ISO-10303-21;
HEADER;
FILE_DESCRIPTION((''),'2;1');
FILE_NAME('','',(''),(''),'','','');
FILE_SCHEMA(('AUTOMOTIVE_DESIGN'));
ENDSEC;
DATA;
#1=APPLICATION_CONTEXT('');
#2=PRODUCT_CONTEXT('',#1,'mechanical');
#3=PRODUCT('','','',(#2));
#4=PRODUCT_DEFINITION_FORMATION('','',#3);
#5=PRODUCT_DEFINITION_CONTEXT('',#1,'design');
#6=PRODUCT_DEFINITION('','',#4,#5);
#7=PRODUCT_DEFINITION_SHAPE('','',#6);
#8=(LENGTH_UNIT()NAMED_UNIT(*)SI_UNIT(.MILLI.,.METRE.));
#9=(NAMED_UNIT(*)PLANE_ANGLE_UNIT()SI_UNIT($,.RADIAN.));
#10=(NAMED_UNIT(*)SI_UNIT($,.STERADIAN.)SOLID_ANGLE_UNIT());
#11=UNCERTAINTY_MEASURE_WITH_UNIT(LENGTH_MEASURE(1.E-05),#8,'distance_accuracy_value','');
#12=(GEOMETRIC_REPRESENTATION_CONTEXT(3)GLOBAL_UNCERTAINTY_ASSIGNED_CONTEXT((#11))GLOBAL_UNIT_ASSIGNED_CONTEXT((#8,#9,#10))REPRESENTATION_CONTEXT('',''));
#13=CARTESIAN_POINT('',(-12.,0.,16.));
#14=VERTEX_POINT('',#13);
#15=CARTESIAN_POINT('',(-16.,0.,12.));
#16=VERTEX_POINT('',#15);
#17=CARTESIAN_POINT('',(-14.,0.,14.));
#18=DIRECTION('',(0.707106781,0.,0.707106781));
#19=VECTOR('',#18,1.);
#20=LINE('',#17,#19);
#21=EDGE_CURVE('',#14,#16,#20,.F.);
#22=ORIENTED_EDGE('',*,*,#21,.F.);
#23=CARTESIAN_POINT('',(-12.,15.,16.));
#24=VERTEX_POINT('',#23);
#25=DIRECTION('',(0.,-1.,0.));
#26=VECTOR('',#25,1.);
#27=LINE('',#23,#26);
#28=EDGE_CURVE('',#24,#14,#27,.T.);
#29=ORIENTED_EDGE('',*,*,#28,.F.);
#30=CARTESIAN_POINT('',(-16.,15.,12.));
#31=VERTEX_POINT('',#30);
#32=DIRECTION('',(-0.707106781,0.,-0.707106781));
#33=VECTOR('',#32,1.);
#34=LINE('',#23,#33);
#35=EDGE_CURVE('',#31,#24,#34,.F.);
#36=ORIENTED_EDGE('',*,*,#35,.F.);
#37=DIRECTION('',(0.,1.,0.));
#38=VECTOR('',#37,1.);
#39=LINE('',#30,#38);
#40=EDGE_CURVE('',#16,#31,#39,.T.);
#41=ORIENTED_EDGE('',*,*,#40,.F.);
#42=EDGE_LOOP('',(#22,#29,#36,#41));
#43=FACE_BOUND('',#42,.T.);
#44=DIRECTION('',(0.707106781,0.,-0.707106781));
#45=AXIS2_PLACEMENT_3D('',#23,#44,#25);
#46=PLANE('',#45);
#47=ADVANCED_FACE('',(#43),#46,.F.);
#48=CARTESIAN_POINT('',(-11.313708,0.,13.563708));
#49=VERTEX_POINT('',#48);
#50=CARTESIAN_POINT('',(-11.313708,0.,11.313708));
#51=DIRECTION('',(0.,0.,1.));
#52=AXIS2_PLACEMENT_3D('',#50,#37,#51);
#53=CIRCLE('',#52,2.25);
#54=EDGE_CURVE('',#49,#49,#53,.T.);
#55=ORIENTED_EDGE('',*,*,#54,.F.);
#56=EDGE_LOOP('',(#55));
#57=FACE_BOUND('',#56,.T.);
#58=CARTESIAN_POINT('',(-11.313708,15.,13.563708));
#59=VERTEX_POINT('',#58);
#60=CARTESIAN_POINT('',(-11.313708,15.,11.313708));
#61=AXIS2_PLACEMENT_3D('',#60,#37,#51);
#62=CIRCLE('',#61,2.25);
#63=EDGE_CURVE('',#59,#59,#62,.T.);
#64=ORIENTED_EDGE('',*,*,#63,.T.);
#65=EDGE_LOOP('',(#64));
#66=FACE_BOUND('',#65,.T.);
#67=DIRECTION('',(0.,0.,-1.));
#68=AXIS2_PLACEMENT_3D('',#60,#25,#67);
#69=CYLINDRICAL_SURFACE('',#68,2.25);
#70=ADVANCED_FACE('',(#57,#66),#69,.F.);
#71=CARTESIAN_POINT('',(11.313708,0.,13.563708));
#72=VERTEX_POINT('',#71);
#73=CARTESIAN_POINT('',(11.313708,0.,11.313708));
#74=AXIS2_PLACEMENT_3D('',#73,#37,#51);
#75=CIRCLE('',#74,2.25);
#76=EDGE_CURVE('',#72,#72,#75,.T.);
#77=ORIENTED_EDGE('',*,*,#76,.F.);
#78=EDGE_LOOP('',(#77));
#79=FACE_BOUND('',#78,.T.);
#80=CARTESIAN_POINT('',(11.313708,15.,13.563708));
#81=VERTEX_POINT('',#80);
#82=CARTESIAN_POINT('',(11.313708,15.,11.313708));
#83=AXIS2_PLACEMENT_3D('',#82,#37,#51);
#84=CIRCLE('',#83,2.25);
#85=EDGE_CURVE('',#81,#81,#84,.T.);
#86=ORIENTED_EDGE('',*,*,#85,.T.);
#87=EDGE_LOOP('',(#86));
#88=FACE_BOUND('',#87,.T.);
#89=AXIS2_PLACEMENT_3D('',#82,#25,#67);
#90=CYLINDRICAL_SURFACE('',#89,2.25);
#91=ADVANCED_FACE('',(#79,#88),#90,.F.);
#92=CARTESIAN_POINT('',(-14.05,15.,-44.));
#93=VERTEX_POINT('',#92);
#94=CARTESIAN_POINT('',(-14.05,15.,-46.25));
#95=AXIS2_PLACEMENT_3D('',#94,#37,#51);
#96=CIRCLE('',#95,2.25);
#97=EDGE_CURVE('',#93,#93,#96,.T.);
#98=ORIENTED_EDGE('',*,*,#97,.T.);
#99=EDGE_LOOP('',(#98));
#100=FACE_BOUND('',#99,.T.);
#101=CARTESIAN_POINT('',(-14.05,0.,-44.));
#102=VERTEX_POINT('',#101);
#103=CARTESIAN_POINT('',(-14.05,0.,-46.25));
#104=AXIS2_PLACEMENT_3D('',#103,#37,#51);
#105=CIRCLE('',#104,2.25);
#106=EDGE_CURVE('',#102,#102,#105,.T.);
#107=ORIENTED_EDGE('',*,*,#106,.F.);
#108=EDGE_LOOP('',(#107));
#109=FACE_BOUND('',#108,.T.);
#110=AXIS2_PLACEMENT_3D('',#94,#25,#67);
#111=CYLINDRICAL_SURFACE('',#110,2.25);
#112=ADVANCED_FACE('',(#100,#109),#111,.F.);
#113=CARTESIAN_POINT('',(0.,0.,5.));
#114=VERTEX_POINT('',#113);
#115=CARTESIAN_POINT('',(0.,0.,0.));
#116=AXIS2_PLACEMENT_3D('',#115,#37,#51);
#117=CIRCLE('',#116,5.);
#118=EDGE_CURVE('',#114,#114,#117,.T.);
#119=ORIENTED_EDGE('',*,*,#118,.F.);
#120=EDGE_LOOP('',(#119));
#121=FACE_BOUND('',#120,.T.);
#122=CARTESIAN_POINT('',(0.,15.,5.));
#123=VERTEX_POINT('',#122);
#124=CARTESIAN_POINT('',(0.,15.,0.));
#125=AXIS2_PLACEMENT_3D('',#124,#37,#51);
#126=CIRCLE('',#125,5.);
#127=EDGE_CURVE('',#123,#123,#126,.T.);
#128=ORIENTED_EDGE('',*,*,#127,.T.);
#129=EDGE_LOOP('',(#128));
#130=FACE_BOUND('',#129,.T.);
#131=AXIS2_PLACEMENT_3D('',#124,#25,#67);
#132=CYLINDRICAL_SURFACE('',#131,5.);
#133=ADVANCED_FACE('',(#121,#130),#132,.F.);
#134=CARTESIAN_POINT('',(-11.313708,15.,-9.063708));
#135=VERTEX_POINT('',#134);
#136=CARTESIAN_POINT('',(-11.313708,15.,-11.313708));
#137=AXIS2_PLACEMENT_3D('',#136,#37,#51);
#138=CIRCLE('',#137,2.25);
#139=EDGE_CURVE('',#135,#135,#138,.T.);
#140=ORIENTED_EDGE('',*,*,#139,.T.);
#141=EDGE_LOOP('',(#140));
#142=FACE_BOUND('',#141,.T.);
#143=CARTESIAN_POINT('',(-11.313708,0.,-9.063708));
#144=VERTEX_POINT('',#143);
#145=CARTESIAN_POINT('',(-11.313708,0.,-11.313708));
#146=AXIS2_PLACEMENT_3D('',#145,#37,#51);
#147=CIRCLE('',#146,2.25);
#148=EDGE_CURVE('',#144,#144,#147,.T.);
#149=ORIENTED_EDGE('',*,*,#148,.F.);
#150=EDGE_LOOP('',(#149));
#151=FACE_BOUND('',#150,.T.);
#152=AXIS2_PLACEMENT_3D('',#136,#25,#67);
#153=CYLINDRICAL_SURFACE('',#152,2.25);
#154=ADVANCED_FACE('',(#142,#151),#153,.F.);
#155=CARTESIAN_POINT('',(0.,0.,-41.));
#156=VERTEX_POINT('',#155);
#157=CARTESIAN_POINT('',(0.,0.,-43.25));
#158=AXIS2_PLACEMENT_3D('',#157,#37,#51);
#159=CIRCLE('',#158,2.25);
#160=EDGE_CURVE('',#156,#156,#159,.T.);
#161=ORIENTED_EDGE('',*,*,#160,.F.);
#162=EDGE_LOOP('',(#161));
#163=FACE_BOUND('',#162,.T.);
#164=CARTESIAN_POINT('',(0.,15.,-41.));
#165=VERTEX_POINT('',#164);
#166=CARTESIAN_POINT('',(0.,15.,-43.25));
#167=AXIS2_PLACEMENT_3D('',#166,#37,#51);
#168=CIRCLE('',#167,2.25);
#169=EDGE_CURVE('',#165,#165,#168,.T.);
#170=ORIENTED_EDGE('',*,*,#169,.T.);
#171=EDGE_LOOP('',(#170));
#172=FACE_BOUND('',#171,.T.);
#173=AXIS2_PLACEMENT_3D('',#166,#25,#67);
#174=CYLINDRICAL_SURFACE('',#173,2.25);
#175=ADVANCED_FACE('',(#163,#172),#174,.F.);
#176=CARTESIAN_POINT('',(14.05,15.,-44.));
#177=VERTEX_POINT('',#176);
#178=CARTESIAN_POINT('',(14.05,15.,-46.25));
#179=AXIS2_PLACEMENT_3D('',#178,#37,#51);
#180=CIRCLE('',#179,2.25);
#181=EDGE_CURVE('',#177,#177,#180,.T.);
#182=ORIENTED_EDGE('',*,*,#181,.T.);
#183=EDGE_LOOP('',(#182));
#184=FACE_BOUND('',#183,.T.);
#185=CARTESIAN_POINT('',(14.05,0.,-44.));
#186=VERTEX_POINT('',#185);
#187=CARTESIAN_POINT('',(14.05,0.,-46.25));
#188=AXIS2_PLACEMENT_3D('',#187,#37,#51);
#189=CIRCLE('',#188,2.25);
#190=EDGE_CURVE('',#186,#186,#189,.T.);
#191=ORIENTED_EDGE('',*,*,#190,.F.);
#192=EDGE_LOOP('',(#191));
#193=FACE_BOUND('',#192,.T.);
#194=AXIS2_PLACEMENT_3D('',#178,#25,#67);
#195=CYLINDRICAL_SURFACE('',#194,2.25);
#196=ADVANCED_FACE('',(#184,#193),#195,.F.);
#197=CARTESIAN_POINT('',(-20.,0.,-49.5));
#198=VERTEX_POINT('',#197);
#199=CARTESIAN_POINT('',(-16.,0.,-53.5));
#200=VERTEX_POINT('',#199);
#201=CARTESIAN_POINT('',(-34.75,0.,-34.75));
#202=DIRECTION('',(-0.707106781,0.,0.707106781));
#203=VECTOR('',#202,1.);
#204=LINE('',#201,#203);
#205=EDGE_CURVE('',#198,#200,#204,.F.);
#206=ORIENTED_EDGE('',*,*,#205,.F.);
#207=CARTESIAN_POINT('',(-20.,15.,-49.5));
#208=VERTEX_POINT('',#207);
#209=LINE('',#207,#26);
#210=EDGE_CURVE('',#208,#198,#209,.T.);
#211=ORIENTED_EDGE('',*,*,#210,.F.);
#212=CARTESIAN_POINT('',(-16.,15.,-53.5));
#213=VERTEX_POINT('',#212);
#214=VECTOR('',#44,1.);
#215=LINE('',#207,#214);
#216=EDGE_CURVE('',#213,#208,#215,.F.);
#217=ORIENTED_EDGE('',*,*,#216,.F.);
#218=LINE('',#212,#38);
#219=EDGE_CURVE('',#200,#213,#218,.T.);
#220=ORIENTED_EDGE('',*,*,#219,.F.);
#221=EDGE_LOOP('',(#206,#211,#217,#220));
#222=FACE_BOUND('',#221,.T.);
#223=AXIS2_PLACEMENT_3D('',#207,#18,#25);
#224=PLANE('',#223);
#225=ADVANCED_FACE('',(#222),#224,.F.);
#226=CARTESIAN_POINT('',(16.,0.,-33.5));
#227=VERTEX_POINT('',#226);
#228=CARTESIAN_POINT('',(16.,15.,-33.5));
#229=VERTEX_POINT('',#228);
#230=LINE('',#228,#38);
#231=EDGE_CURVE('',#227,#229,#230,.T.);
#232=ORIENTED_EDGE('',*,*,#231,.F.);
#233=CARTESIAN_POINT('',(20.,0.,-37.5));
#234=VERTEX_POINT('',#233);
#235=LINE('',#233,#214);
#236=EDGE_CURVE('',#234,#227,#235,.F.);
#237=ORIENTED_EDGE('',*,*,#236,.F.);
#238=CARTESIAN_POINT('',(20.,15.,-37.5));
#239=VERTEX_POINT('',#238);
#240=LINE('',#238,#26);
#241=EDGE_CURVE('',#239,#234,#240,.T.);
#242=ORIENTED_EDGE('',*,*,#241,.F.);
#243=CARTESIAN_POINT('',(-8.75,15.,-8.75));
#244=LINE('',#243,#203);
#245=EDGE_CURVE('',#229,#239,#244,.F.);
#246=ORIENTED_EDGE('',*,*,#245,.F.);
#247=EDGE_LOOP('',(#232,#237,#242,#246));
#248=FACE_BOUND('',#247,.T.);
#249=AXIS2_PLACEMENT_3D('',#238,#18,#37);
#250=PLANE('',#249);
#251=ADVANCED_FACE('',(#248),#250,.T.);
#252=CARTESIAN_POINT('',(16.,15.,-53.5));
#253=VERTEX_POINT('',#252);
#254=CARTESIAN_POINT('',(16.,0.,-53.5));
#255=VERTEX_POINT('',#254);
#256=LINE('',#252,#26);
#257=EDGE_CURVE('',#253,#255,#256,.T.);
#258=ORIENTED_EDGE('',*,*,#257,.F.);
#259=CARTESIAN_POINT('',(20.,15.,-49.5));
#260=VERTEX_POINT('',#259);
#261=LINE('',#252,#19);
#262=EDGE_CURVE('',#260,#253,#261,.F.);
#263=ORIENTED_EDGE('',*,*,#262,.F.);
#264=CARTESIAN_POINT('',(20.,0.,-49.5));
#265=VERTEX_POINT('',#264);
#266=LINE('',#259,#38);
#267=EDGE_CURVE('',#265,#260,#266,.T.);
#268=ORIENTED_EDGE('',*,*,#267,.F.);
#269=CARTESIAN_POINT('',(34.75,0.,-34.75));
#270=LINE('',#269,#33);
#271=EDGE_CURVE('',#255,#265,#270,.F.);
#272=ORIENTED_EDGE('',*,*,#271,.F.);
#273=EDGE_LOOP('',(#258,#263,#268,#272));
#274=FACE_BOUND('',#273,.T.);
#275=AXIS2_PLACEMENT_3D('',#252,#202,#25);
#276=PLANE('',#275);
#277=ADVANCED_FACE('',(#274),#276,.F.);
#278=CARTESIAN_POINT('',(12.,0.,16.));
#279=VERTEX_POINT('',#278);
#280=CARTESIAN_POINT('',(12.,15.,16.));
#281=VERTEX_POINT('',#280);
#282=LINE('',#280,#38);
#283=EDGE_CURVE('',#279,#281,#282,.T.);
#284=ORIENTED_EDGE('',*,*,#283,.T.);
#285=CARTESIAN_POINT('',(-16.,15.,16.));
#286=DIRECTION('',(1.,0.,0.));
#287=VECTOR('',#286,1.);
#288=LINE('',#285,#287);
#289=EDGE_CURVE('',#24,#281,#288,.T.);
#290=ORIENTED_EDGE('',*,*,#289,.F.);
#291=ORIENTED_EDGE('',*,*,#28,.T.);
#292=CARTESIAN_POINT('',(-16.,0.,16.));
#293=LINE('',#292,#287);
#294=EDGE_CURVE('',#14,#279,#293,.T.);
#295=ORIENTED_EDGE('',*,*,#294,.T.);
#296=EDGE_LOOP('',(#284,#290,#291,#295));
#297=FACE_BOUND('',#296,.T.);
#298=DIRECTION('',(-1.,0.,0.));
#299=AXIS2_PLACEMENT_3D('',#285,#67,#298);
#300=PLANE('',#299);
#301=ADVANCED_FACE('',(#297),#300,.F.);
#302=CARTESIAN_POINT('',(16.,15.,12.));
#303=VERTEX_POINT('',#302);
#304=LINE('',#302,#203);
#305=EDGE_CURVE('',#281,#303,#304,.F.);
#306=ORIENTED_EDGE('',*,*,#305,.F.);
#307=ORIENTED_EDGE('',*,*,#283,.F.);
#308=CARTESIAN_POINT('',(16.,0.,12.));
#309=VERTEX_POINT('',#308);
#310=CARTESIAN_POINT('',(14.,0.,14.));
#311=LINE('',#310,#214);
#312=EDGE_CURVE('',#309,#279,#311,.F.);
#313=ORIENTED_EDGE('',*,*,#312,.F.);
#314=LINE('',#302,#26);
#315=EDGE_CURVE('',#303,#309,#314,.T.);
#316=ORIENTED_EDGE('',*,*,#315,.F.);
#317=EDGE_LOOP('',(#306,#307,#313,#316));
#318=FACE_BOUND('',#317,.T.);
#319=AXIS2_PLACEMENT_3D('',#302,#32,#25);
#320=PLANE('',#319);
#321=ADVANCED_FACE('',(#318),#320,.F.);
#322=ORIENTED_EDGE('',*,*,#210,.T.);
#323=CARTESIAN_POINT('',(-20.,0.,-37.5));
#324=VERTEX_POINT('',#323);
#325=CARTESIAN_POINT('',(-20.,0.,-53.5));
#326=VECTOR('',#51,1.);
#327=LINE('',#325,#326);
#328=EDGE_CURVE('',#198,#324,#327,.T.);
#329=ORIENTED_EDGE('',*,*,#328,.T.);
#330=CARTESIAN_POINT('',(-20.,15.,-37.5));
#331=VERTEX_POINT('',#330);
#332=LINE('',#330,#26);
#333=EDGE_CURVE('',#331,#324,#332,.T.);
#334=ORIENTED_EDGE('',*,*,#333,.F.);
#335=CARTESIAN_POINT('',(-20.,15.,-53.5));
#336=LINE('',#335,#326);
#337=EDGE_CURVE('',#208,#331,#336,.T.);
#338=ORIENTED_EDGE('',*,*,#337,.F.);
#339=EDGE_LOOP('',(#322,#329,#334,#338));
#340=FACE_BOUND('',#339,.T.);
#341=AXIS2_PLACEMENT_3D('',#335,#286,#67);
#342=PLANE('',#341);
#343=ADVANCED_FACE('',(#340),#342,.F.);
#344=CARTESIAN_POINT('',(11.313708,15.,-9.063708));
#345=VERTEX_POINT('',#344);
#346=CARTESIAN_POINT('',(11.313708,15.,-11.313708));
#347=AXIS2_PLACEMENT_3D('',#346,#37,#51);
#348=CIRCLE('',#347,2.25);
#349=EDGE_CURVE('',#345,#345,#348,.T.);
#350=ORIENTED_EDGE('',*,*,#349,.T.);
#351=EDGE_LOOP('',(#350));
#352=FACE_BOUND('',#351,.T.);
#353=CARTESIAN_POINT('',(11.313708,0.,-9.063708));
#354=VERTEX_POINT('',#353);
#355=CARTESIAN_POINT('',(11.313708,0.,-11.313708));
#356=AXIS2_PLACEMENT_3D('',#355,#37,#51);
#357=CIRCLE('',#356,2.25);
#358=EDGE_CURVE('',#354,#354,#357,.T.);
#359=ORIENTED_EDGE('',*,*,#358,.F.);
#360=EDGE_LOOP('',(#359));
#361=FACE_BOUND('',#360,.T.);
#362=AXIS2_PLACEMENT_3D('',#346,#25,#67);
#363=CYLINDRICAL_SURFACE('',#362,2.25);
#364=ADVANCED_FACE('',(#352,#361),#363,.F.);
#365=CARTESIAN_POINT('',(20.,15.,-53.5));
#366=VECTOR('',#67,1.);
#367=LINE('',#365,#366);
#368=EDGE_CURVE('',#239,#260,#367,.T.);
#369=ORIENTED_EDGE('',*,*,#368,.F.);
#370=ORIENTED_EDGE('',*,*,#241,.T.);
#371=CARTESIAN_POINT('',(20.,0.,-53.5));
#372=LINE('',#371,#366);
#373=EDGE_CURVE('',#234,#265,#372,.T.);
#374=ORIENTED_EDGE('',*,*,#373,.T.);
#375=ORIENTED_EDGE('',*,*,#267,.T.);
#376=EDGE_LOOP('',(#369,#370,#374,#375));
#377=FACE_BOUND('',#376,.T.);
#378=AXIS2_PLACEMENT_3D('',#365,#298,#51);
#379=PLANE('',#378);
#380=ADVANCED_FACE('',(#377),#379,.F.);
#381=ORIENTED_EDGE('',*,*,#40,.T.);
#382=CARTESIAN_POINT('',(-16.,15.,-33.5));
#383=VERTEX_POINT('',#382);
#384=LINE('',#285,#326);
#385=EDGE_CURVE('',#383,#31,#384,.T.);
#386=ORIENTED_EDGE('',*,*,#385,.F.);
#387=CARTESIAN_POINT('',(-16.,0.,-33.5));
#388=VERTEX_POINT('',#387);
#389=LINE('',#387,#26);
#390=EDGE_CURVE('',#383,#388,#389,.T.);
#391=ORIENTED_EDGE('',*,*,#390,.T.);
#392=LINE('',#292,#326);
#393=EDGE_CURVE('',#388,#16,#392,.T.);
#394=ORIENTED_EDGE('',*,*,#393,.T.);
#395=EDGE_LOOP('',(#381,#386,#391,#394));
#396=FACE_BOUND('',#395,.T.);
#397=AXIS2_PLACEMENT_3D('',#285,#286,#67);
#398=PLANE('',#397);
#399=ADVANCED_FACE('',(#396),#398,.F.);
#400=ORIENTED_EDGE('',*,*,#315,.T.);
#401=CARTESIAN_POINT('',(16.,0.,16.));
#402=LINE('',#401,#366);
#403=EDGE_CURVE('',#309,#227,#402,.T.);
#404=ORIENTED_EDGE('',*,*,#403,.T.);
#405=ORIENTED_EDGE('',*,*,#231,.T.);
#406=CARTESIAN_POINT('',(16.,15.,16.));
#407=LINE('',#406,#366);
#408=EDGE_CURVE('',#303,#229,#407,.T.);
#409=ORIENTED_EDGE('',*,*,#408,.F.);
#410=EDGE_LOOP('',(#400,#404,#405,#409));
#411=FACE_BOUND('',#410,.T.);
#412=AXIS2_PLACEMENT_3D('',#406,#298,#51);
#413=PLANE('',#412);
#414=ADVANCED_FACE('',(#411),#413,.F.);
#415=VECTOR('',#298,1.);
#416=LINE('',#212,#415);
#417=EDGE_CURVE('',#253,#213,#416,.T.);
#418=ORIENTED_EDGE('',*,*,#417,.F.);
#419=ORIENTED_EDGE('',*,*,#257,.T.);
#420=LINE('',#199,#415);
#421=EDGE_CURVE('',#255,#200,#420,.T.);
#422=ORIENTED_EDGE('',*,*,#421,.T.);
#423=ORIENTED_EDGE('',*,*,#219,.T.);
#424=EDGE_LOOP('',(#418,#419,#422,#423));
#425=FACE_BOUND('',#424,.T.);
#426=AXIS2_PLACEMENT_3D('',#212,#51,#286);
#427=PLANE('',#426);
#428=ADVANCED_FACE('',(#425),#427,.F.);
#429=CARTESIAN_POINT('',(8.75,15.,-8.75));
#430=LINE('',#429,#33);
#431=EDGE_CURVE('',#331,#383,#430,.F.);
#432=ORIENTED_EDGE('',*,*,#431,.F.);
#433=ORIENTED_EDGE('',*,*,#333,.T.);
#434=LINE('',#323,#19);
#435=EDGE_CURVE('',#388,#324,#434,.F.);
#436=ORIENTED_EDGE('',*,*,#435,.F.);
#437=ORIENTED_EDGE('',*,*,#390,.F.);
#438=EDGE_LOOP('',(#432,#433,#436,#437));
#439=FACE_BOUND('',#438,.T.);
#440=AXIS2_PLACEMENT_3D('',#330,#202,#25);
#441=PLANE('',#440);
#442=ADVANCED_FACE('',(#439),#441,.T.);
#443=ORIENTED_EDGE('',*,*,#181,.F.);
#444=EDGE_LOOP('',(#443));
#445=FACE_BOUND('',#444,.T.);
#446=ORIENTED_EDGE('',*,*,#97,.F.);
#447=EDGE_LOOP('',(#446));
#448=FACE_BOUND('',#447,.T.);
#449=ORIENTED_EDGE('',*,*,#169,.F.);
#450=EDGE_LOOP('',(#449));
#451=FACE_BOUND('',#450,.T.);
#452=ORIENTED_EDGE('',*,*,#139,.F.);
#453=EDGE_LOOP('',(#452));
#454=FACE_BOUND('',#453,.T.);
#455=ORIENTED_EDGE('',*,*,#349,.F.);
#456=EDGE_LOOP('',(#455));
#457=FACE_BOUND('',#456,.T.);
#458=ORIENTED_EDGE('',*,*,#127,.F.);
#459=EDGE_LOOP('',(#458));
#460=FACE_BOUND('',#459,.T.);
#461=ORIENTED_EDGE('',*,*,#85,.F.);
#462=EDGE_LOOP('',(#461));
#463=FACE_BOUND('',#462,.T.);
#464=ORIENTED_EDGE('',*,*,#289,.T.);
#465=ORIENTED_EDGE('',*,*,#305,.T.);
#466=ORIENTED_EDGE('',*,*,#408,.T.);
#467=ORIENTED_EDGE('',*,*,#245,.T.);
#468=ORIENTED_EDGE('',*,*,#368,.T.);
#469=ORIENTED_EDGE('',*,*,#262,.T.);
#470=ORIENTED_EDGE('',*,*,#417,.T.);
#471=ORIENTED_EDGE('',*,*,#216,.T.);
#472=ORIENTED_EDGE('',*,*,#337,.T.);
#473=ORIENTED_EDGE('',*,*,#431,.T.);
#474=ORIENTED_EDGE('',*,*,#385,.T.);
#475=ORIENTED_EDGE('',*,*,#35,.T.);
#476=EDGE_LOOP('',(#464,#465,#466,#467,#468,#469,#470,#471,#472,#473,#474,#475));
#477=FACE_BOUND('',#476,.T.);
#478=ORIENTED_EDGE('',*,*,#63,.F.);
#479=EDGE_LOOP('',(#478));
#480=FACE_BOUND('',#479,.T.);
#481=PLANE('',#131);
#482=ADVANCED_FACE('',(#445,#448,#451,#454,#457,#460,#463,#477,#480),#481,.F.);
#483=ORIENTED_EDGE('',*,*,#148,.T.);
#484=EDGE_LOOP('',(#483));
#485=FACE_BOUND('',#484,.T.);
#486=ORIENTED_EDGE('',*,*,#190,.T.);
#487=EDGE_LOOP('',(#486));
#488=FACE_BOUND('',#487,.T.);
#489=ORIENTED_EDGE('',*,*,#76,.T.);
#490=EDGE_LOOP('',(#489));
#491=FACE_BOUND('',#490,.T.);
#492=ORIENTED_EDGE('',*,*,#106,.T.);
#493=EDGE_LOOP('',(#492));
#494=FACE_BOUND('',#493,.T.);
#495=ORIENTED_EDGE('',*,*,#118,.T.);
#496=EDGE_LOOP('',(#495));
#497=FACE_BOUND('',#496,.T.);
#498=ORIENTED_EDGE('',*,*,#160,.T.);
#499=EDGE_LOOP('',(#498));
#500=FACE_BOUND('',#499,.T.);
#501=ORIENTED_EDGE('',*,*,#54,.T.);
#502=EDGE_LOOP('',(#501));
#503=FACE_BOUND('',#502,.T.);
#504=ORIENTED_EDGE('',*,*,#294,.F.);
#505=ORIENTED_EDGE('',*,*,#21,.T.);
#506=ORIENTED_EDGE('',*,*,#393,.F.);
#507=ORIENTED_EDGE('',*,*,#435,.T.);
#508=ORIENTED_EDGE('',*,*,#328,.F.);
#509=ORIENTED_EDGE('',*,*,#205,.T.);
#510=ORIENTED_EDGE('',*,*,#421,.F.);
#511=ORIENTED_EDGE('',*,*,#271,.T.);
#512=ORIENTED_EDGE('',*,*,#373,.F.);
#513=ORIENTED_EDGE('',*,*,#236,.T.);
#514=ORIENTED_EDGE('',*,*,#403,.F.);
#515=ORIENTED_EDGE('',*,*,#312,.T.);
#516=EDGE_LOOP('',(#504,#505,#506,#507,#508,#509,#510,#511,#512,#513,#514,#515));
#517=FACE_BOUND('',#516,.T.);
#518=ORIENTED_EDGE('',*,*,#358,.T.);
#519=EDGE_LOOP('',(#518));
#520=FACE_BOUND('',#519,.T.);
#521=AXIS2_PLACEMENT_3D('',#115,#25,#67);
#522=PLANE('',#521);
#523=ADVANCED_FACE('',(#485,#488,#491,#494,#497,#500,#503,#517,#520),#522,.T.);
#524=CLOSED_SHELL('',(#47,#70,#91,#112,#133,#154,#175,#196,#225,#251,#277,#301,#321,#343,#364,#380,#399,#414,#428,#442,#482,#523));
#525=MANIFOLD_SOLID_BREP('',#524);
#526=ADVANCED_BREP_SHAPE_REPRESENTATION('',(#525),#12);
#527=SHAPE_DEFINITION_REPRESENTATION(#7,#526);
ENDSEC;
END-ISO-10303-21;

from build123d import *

# Parameters (mm, degrees)
SKETCH1_W           = 32
SKETCH1_H           = 69.5
SKETCH1_R           = 5
SKETCH1_R_2         = 2.25
BOSS_EXTRUDE1_DEPTH = 15
SKETCH7_W           = 40
SKETCH7_H           = 16
BOSS_EXTRUDE6_DEPTH = 15
SKETCH5_R           = 2.25
CUT_EXTRUDE2_DEPTH  = 60.052942348
CHAMFER1_SIZE       = 4


with BuildPart() as part:
    # Sketch1 → Boss-Extrude1 (new body)
    with BuildSketch(Plane(origin=(0, 0, 0), x_dir=(1, 0, 0), z_dir=(0, 1, 0))):
        with Locations((0, 18.75)):
            Rectangle(SKETCH1_W, SKETCH1_H)
        with Locations(Location((0, 0, 0), (0, 0, 270))):
            Circle(SKETCH1_R, mode=Mode.SUBTRACT)
        with Locations(Location((11.313708499, -11.313708499, 0), (0, 0, 270))):
            Circle(SKETCH1_R_2, mode=Mode.SUBTRACT)
        with Locations(Location((11.313708499, 11.313708499, 0), (0, 0, 270))):
            Circle(SKETCH1_R_2, mode=Mode.SUBTRACT)
        with Locations(Location((-11.313708499, 11.313708499, 0), (0, 0, 270))):
            Circle(SKETCH1_R_2, mode=Mode.SUBTRACT)
        with Locations(Location((-11.313708499, -11.313708499, 0), (0, 0, 270))):
            Circle(SKETCH1_R_2, mode=Mode.SUBTRACT)
    extrude(amount=BOSS_EXTRUDE1_DEPTH)

    # Sketch7 → Boss-Extrude6 (add)
    with BuildSketch(Plane(origin=(0, 0, 0), x_dir=(1, 0, 0), z_dir=(0, 1, 0))):
        with Locations((0, 45.5)):
            Rectangle(SKETCH7_W, SKETCH7_H)
    extrude(amount=BOSS_EXTRUDE6_DEPTH)

    # Sketch5 → Cut-Extrude2 (cut, through all)
    with BuildSketch(Plane(origin=(0, 0, 0), x_dir=(1, 0, 0), z_dir=(0, 1, 0))):
        with Locations(Location((0, 43.25, 0), (0, 0, 270))):
            Circle(SKETCH5_R)
        with Locations(Location((14.05, 46.25, 0), (0, 0, 270))):
            Circle(SKETCH5_R)
        with Locations(Location((-14.05, 46.25, 0), (0, 0, 270))):
            Circle(SKETCH5_R)
    extrude(amount=CUT_EXTRUDE2_DEPTH, mode=Mode.SUBTRACT)

    # Chamfer1
    chamfer1_edges = [part.edges().sort_by_distance(p)[0] for p in [
        (16, 7.5, 16),
        (-16, 7.5, 16),
        (-16, 7.5, -37.5),
        (16, 7.5, -37.5),
        (20, 7.5, -53.5),
        (-20, 7.5, -53.5),
    ]]
    chamfer(chamfer1_edges, length=CHAMFER1_SIZE - 0.0001)  # a hair under: the kernel refuses the full size


solid = part.part
